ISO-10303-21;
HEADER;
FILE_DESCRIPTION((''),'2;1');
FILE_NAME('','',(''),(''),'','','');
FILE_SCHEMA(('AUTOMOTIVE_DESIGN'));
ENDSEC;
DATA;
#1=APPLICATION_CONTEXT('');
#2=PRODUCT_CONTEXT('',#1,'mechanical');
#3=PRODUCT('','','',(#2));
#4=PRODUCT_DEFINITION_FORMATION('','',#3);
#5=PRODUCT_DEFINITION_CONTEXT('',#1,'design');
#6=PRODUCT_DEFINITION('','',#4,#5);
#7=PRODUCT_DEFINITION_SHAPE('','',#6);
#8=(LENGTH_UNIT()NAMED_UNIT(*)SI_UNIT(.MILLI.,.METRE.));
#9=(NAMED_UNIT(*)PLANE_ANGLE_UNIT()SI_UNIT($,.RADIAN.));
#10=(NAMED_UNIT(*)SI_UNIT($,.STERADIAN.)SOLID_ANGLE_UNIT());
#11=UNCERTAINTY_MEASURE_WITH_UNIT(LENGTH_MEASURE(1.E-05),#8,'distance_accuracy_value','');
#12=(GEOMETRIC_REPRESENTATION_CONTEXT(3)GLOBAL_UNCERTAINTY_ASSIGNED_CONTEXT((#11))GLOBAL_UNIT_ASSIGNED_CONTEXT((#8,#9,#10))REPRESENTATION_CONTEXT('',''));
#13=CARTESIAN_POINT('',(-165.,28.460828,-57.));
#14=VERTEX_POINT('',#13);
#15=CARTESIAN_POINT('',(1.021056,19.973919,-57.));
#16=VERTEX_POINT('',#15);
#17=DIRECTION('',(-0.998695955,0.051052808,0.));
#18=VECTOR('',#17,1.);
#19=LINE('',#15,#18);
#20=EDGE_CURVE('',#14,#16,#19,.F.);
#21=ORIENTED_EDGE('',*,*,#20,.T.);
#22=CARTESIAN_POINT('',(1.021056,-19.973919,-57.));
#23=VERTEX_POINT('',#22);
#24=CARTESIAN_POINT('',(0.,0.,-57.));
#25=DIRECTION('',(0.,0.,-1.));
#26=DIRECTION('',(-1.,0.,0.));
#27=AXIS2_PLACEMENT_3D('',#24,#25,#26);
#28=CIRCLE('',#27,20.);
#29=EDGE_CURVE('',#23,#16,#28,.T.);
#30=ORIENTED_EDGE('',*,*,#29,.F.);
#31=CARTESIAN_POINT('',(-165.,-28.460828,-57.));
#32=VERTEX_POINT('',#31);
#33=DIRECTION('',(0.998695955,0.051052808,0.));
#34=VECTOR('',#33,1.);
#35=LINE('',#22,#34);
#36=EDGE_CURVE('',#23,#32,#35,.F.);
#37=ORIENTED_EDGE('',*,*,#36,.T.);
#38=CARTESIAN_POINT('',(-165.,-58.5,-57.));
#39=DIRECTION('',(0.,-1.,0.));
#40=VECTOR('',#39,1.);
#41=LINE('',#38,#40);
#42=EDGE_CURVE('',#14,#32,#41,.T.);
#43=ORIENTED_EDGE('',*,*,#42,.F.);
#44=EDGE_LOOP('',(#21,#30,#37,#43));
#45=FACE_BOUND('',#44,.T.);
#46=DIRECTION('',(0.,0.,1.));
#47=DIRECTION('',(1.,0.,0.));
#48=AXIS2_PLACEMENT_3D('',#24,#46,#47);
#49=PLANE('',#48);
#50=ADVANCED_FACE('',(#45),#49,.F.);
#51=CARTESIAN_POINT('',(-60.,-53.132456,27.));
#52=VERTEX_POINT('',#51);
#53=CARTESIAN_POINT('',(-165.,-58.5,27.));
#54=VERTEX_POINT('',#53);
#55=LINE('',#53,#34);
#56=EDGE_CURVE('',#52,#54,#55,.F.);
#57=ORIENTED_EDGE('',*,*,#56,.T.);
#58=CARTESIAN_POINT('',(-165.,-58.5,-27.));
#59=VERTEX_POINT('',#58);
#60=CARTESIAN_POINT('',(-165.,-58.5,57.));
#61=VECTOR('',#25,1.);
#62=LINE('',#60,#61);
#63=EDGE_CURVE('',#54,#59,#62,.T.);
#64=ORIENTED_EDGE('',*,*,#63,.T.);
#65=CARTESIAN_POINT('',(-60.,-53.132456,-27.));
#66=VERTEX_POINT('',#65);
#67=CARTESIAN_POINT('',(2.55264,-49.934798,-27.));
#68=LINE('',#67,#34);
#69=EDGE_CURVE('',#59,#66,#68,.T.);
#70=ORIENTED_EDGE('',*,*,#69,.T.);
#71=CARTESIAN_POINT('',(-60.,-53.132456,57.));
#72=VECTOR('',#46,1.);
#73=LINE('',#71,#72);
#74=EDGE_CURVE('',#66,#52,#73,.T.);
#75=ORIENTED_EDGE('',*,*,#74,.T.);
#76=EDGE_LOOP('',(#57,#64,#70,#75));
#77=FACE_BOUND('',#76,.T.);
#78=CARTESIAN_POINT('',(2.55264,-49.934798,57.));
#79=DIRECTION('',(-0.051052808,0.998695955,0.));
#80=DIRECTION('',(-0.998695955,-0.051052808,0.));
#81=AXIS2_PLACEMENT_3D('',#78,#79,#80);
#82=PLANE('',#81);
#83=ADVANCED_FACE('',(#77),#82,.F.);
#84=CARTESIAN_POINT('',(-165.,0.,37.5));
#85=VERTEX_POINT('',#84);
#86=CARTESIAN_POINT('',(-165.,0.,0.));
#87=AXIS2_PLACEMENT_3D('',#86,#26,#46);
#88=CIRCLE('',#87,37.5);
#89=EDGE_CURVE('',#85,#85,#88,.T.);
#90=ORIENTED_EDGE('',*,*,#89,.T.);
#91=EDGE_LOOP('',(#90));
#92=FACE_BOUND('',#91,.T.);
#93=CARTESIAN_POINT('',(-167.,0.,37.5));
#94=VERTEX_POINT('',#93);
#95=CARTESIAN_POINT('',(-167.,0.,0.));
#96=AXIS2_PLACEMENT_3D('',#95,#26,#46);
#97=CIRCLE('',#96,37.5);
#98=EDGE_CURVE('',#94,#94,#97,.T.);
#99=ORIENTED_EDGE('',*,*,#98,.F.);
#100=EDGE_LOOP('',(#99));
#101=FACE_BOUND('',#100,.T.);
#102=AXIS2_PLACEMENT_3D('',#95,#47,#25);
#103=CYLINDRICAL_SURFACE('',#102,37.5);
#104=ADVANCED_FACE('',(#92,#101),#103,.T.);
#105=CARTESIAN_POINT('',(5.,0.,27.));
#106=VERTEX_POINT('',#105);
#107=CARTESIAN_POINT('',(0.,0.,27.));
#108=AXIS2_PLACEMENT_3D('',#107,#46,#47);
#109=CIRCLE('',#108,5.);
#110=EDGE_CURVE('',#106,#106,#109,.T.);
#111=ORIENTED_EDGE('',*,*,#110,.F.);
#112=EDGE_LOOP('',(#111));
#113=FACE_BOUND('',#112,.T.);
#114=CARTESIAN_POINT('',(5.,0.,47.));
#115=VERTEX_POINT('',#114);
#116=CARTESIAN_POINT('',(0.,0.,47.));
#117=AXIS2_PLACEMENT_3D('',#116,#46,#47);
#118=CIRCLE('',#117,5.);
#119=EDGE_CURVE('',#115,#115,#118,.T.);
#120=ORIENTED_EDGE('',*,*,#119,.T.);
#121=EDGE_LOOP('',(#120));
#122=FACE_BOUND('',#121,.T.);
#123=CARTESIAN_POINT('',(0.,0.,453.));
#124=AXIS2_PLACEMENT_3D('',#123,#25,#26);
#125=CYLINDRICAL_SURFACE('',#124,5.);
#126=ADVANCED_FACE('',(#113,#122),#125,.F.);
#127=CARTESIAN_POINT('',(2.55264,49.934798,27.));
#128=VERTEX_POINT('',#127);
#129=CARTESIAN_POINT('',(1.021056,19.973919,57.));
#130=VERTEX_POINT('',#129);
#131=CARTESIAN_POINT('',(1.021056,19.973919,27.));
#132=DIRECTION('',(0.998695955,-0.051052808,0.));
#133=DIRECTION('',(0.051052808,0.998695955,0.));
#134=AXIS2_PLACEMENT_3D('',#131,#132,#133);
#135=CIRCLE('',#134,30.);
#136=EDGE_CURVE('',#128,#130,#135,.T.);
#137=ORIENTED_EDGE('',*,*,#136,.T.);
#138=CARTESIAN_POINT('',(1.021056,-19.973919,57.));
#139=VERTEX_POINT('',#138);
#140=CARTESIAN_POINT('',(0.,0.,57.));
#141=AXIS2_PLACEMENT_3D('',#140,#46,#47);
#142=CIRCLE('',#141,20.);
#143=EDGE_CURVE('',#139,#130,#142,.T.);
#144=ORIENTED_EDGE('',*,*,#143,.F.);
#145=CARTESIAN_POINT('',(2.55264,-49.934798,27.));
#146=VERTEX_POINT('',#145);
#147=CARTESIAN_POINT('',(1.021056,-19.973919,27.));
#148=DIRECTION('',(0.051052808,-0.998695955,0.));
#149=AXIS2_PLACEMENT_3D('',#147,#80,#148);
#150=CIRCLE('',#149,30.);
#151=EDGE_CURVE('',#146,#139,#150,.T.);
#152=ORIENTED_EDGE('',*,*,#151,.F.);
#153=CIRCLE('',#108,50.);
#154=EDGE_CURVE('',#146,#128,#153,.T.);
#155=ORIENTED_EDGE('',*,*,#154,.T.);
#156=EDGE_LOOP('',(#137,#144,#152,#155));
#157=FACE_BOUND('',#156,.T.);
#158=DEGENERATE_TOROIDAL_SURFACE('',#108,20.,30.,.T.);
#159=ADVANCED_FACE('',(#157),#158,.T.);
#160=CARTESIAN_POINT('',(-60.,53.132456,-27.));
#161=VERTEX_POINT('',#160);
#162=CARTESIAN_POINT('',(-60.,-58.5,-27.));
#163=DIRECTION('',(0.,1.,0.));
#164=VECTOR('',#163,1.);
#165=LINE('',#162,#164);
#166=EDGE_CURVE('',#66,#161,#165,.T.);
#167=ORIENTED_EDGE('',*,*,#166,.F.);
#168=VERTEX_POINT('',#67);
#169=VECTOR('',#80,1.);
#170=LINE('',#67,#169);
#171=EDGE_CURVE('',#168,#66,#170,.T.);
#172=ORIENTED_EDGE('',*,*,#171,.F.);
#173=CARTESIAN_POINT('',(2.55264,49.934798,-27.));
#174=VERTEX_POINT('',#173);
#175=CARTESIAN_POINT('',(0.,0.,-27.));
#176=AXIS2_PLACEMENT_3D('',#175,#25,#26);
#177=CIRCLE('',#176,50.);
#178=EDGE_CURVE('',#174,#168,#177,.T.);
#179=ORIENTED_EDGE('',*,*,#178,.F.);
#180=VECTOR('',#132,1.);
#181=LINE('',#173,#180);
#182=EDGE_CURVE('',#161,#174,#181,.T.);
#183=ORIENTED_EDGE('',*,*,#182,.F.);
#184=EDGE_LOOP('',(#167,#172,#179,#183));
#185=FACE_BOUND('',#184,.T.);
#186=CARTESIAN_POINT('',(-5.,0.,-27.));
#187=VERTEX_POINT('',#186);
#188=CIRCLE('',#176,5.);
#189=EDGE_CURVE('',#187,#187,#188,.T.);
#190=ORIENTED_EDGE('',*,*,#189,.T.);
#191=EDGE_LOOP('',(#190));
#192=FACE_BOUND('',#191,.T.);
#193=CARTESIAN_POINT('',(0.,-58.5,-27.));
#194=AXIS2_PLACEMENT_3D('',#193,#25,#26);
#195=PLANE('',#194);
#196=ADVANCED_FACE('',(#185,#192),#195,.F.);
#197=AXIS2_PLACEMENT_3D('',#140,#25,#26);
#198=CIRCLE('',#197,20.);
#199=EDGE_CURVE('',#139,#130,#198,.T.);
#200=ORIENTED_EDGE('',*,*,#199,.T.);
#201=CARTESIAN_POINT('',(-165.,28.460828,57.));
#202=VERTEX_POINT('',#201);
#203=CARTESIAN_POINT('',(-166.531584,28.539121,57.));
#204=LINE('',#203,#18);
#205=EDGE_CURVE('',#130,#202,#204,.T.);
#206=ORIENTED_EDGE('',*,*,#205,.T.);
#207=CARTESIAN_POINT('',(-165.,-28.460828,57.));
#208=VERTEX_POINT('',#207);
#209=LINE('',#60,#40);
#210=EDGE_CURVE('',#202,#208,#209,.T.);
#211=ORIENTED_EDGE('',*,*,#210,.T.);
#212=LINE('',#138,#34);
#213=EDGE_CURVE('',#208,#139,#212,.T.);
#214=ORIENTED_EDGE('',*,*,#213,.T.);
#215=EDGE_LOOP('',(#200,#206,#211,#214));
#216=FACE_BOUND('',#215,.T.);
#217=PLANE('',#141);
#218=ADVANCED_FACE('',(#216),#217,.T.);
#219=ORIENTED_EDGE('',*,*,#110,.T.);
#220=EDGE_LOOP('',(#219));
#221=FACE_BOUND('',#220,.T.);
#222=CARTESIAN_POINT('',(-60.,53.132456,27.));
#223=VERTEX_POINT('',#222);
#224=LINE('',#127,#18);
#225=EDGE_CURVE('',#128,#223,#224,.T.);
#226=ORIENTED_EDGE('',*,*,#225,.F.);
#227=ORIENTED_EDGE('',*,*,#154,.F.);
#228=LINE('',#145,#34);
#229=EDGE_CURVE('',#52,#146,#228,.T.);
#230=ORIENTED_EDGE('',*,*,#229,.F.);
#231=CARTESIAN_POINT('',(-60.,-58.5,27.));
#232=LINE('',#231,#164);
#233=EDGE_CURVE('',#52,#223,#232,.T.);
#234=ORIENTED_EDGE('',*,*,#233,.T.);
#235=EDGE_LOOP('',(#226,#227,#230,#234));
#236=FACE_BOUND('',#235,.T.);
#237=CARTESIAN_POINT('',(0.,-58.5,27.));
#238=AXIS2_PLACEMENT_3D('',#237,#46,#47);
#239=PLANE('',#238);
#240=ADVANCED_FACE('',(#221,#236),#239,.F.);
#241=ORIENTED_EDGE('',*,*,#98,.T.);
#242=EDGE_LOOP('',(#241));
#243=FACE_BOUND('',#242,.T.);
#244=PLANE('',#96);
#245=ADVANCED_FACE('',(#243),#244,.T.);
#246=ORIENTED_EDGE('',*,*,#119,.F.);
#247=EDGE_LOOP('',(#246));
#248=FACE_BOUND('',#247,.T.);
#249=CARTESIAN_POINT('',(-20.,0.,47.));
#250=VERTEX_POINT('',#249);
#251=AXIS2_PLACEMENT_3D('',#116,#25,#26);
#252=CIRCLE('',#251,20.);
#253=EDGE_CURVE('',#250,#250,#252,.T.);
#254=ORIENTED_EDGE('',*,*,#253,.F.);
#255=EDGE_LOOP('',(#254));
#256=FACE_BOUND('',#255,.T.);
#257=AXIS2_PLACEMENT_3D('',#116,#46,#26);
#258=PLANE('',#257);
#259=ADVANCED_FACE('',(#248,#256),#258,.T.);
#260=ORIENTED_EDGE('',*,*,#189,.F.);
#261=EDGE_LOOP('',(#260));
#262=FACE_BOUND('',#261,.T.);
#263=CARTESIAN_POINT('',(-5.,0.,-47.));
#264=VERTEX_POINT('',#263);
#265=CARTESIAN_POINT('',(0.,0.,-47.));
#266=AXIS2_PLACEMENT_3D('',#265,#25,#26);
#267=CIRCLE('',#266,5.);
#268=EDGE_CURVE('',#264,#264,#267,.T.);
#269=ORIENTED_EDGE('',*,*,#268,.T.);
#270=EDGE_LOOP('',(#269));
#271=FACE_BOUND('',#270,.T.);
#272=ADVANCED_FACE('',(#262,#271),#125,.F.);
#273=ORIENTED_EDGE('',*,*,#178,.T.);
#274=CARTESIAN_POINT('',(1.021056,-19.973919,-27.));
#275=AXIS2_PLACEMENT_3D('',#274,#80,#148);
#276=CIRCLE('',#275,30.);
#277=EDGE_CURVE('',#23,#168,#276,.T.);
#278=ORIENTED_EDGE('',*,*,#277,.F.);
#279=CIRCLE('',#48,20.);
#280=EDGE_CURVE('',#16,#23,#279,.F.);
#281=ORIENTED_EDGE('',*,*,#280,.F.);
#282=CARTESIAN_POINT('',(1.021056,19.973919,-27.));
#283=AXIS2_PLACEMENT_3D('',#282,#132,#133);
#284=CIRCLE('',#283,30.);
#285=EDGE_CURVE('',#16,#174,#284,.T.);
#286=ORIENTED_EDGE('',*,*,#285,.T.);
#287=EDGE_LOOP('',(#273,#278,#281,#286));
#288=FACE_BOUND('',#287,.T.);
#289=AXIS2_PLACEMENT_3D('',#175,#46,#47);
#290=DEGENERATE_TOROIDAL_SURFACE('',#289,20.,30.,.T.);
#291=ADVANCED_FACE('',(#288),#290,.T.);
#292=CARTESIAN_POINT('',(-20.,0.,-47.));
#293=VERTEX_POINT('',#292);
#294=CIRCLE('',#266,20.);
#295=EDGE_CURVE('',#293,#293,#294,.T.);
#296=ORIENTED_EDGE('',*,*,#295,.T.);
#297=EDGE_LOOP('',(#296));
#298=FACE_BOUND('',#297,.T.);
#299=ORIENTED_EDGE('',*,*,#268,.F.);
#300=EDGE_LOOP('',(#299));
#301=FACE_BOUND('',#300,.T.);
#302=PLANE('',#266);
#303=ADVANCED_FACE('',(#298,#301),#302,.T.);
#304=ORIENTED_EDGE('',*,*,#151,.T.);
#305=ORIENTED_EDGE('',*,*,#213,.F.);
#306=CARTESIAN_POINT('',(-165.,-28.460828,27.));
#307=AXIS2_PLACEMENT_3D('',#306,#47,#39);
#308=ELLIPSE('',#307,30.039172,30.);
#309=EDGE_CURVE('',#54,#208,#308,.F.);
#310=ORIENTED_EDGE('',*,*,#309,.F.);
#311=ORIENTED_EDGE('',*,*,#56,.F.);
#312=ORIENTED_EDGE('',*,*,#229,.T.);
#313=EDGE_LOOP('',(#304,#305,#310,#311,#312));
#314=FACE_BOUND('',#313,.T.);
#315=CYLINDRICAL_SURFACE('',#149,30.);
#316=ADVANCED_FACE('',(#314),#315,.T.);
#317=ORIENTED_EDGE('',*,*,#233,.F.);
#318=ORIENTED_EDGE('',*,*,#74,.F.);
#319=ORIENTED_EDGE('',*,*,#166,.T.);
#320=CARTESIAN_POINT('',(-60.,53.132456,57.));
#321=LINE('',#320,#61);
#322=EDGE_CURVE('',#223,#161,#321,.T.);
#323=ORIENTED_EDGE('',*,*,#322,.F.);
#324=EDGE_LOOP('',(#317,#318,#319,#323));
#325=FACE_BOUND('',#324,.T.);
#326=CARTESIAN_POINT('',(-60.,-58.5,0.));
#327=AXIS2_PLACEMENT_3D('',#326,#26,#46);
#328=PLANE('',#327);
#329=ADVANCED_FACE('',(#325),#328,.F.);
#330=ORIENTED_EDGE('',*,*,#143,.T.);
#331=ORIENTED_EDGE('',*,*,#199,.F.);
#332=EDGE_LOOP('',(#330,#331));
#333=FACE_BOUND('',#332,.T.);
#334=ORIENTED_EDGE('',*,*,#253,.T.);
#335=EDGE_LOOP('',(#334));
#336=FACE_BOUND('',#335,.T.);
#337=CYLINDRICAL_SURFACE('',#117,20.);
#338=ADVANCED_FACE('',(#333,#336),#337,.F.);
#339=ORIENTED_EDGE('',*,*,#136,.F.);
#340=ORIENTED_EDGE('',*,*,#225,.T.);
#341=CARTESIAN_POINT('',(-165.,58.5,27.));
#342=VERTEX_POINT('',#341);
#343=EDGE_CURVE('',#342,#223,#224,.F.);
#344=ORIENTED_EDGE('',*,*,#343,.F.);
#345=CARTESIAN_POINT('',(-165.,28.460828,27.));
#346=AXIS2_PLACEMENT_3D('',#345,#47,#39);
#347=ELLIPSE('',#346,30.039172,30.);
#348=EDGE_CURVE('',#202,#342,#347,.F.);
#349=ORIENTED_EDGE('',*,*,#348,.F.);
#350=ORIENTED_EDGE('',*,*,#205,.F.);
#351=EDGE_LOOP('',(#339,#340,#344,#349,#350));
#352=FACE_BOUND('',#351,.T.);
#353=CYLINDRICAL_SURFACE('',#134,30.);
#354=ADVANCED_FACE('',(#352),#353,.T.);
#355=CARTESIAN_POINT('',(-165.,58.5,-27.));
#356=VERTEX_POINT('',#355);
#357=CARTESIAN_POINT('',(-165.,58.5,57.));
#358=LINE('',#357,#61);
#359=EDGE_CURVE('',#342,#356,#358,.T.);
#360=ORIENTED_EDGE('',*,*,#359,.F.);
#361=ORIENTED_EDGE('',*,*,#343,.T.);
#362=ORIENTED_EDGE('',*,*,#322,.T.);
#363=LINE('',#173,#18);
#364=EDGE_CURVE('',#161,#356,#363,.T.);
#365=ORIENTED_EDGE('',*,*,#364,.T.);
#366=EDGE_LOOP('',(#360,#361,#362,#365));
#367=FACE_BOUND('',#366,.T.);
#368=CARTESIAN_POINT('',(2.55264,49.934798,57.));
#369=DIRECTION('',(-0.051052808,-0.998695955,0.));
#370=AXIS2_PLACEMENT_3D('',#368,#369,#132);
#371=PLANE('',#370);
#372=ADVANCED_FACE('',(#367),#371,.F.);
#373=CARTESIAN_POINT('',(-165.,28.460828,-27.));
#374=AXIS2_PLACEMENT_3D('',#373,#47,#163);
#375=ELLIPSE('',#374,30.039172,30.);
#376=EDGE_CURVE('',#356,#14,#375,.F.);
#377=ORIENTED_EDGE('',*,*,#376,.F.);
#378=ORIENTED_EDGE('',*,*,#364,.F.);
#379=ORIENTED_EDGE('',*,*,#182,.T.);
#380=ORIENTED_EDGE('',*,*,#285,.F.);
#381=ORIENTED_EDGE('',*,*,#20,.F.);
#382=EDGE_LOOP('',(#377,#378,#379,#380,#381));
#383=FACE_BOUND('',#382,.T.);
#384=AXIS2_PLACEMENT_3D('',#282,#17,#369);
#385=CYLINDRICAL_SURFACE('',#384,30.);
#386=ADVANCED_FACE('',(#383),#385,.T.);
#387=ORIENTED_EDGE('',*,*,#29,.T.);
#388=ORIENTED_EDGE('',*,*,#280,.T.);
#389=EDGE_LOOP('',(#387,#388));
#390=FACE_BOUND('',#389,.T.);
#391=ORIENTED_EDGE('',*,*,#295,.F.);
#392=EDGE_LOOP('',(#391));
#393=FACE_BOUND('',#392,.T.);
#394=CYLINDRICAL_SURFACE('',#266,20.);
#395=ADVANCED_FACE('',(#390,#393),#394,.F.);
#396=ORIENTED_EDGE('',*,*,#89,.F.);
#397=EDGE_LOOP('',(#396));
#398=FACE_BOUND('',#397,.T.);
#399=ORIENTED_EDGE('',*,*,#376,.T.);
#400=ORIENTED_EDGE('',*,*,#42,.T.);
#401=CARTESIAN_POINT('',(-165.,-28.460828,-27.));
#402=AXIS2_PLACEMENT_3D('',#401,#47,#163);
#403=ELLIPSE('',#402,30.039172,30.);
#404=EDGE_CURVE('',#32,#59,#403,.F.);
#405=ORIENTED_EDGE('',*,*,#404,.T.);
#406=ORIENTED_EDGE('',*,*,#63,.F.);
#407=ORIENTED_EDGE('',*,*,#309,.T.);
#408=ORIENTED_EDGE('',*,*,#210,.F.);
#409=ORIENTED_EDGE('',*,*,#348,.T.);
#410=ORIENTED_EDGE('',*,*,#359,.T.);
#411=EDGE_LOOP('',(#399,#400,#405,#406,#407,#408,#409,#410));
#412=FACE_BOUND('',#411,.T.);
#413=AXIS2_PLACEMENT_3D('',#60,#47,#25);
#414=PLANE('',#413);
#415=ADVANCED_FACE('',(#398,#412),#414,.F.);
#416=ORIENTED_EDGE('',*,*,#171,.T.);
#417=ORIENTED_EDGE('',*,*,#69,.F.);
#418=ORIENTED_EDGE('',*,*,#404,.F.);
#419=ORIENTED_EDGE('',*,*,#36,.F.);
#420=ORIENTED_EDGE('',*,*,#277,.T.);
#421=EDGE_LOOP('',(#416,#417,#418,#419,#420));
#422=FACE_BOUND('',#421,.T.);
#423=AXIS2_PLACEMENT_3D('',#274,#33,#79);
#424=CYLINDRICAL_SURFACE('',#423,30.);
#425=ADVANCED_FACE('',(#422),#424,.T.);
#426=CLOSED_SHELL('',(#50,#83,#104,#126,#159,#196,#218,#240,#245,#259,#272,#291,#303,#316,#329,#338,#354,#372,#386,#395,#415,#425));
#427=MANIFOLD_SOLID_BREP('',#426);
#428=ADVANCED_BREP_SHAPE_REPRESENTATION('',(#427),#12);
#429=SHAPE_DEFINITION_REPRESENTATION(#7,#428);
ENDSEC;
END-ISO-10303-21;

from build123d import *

# Parameters (mm, degrees)
BOSS_EXTRUDE1_DEPTH     = 57
SKETCH2_R               = 37.5
BOSS_EXTRUDE2_DEPTH     = 2
CUT_EXTRUDE1_DEPTH      = 186.90387301
CUT_EXTRUDE1_DEPTH_BACK = 186.90387301
FILLET2_R               = 30
SKETCH5_R               = 20
CUT_EXTRUDE2_DEPTH      = 10
SKETCH6_R               = 5
CUT_EXTRUDE3_DEPTH      = 500


with BuildPart() as part:
    # Sketch1 → Boss-Extrude1 (new, symmetric)
    with BuildSketch(Plane.XY):
        with BuildLine():
            Line((-165, -58.5), (-165, 58.5))
            Line((-165, 58.5), (2.552640416, 49.934797756))
            ThreePointArc((2.552640416, 49.934797756), (50, 0), (2.552640416, -49.934797756))
            Line((2.552640416, -49.934797756), (-165, -58.5))
        make_face()
    extrude(amount=BOSS_EXTRUDE1_DEPTH, both=True)

    # Sketch2 → Boss-Extrude2 (add)
    with BuildSketch(Plane.ZY.offset(165)):
        Circle(SKETCH2_R)
    extrude(amount=BOSS_EXTRUDE2_DEPTH)

    # Sketch3 → Cut-Extrude1 (cut, two sides: drawn at the far end of the back side and taken through both)
    with BuildSketch(Plane(origin=(0, 0, 0), x_dir=(1, 0, 0), z_dir=(0, 1, 0)).offset(-CUT_EXTRUDE1_DEPTH_BACK)):
        Polygon((50, -27), (50, 0), (50, 27), (-60, 27), (-60, -27), align=None)
    extrude(amount=CUT_EXTRUDE1_DEPTH + CUT_EXTRUDE1_DEPTH_BACK, mode=Mode.SUBTRACT)

    # Fillet2
    fillet2_edges = [part.edges().sort_by_distance(p)[0] for p in [
        (-81.223679792, -54.217398878, 57),
        (-81.223679792, -54.217398878, -57),
        (50, 0, -57),
        (-81.223679792, 54.217398878, -57),
        (-81.223679792, 54.217398878, 57),
        (50, 0, 57),
    ]]
    fillet(fillet2_edges, radius=FILLET2_R - 0.0001)  # a hair under: the kernel refuses the full size

    # Sketch5 → Cut-Extrude2 (cut)
    with BuildSketch(Plane(origin=(0, 0, -57), x_dir=(-1, 0, 0), z_dir=(0, 0, -1))):
        Circle(SKETCH5_R)
    cut_extrude2 = extrude(amount=-CUT_EXTRUDE2_DEPTH, mode=Mode.SUBTRACT)

    # Mirror1: Cut-Extrude2 across plane
    add(cut_extrude2.mirror(Plane.XY), mode=Mode.SUBTRACT)

    # Sketch6 → Cut-Extrude3 (cut)
    with BuildSketch(Plane(origin=(0, 0, -47), x_dir=(-1, 0, 0), z_dir=(0, 0, -1))):
        with Locations(Location((0, 0, 0), (0, 0, 180))):
            Circle(SKETCH6_R)
    extrude(amount=-CUT_EXTRUDE3_DEPTH, mode=Mode.SUBTRACT)


solid = part.part
